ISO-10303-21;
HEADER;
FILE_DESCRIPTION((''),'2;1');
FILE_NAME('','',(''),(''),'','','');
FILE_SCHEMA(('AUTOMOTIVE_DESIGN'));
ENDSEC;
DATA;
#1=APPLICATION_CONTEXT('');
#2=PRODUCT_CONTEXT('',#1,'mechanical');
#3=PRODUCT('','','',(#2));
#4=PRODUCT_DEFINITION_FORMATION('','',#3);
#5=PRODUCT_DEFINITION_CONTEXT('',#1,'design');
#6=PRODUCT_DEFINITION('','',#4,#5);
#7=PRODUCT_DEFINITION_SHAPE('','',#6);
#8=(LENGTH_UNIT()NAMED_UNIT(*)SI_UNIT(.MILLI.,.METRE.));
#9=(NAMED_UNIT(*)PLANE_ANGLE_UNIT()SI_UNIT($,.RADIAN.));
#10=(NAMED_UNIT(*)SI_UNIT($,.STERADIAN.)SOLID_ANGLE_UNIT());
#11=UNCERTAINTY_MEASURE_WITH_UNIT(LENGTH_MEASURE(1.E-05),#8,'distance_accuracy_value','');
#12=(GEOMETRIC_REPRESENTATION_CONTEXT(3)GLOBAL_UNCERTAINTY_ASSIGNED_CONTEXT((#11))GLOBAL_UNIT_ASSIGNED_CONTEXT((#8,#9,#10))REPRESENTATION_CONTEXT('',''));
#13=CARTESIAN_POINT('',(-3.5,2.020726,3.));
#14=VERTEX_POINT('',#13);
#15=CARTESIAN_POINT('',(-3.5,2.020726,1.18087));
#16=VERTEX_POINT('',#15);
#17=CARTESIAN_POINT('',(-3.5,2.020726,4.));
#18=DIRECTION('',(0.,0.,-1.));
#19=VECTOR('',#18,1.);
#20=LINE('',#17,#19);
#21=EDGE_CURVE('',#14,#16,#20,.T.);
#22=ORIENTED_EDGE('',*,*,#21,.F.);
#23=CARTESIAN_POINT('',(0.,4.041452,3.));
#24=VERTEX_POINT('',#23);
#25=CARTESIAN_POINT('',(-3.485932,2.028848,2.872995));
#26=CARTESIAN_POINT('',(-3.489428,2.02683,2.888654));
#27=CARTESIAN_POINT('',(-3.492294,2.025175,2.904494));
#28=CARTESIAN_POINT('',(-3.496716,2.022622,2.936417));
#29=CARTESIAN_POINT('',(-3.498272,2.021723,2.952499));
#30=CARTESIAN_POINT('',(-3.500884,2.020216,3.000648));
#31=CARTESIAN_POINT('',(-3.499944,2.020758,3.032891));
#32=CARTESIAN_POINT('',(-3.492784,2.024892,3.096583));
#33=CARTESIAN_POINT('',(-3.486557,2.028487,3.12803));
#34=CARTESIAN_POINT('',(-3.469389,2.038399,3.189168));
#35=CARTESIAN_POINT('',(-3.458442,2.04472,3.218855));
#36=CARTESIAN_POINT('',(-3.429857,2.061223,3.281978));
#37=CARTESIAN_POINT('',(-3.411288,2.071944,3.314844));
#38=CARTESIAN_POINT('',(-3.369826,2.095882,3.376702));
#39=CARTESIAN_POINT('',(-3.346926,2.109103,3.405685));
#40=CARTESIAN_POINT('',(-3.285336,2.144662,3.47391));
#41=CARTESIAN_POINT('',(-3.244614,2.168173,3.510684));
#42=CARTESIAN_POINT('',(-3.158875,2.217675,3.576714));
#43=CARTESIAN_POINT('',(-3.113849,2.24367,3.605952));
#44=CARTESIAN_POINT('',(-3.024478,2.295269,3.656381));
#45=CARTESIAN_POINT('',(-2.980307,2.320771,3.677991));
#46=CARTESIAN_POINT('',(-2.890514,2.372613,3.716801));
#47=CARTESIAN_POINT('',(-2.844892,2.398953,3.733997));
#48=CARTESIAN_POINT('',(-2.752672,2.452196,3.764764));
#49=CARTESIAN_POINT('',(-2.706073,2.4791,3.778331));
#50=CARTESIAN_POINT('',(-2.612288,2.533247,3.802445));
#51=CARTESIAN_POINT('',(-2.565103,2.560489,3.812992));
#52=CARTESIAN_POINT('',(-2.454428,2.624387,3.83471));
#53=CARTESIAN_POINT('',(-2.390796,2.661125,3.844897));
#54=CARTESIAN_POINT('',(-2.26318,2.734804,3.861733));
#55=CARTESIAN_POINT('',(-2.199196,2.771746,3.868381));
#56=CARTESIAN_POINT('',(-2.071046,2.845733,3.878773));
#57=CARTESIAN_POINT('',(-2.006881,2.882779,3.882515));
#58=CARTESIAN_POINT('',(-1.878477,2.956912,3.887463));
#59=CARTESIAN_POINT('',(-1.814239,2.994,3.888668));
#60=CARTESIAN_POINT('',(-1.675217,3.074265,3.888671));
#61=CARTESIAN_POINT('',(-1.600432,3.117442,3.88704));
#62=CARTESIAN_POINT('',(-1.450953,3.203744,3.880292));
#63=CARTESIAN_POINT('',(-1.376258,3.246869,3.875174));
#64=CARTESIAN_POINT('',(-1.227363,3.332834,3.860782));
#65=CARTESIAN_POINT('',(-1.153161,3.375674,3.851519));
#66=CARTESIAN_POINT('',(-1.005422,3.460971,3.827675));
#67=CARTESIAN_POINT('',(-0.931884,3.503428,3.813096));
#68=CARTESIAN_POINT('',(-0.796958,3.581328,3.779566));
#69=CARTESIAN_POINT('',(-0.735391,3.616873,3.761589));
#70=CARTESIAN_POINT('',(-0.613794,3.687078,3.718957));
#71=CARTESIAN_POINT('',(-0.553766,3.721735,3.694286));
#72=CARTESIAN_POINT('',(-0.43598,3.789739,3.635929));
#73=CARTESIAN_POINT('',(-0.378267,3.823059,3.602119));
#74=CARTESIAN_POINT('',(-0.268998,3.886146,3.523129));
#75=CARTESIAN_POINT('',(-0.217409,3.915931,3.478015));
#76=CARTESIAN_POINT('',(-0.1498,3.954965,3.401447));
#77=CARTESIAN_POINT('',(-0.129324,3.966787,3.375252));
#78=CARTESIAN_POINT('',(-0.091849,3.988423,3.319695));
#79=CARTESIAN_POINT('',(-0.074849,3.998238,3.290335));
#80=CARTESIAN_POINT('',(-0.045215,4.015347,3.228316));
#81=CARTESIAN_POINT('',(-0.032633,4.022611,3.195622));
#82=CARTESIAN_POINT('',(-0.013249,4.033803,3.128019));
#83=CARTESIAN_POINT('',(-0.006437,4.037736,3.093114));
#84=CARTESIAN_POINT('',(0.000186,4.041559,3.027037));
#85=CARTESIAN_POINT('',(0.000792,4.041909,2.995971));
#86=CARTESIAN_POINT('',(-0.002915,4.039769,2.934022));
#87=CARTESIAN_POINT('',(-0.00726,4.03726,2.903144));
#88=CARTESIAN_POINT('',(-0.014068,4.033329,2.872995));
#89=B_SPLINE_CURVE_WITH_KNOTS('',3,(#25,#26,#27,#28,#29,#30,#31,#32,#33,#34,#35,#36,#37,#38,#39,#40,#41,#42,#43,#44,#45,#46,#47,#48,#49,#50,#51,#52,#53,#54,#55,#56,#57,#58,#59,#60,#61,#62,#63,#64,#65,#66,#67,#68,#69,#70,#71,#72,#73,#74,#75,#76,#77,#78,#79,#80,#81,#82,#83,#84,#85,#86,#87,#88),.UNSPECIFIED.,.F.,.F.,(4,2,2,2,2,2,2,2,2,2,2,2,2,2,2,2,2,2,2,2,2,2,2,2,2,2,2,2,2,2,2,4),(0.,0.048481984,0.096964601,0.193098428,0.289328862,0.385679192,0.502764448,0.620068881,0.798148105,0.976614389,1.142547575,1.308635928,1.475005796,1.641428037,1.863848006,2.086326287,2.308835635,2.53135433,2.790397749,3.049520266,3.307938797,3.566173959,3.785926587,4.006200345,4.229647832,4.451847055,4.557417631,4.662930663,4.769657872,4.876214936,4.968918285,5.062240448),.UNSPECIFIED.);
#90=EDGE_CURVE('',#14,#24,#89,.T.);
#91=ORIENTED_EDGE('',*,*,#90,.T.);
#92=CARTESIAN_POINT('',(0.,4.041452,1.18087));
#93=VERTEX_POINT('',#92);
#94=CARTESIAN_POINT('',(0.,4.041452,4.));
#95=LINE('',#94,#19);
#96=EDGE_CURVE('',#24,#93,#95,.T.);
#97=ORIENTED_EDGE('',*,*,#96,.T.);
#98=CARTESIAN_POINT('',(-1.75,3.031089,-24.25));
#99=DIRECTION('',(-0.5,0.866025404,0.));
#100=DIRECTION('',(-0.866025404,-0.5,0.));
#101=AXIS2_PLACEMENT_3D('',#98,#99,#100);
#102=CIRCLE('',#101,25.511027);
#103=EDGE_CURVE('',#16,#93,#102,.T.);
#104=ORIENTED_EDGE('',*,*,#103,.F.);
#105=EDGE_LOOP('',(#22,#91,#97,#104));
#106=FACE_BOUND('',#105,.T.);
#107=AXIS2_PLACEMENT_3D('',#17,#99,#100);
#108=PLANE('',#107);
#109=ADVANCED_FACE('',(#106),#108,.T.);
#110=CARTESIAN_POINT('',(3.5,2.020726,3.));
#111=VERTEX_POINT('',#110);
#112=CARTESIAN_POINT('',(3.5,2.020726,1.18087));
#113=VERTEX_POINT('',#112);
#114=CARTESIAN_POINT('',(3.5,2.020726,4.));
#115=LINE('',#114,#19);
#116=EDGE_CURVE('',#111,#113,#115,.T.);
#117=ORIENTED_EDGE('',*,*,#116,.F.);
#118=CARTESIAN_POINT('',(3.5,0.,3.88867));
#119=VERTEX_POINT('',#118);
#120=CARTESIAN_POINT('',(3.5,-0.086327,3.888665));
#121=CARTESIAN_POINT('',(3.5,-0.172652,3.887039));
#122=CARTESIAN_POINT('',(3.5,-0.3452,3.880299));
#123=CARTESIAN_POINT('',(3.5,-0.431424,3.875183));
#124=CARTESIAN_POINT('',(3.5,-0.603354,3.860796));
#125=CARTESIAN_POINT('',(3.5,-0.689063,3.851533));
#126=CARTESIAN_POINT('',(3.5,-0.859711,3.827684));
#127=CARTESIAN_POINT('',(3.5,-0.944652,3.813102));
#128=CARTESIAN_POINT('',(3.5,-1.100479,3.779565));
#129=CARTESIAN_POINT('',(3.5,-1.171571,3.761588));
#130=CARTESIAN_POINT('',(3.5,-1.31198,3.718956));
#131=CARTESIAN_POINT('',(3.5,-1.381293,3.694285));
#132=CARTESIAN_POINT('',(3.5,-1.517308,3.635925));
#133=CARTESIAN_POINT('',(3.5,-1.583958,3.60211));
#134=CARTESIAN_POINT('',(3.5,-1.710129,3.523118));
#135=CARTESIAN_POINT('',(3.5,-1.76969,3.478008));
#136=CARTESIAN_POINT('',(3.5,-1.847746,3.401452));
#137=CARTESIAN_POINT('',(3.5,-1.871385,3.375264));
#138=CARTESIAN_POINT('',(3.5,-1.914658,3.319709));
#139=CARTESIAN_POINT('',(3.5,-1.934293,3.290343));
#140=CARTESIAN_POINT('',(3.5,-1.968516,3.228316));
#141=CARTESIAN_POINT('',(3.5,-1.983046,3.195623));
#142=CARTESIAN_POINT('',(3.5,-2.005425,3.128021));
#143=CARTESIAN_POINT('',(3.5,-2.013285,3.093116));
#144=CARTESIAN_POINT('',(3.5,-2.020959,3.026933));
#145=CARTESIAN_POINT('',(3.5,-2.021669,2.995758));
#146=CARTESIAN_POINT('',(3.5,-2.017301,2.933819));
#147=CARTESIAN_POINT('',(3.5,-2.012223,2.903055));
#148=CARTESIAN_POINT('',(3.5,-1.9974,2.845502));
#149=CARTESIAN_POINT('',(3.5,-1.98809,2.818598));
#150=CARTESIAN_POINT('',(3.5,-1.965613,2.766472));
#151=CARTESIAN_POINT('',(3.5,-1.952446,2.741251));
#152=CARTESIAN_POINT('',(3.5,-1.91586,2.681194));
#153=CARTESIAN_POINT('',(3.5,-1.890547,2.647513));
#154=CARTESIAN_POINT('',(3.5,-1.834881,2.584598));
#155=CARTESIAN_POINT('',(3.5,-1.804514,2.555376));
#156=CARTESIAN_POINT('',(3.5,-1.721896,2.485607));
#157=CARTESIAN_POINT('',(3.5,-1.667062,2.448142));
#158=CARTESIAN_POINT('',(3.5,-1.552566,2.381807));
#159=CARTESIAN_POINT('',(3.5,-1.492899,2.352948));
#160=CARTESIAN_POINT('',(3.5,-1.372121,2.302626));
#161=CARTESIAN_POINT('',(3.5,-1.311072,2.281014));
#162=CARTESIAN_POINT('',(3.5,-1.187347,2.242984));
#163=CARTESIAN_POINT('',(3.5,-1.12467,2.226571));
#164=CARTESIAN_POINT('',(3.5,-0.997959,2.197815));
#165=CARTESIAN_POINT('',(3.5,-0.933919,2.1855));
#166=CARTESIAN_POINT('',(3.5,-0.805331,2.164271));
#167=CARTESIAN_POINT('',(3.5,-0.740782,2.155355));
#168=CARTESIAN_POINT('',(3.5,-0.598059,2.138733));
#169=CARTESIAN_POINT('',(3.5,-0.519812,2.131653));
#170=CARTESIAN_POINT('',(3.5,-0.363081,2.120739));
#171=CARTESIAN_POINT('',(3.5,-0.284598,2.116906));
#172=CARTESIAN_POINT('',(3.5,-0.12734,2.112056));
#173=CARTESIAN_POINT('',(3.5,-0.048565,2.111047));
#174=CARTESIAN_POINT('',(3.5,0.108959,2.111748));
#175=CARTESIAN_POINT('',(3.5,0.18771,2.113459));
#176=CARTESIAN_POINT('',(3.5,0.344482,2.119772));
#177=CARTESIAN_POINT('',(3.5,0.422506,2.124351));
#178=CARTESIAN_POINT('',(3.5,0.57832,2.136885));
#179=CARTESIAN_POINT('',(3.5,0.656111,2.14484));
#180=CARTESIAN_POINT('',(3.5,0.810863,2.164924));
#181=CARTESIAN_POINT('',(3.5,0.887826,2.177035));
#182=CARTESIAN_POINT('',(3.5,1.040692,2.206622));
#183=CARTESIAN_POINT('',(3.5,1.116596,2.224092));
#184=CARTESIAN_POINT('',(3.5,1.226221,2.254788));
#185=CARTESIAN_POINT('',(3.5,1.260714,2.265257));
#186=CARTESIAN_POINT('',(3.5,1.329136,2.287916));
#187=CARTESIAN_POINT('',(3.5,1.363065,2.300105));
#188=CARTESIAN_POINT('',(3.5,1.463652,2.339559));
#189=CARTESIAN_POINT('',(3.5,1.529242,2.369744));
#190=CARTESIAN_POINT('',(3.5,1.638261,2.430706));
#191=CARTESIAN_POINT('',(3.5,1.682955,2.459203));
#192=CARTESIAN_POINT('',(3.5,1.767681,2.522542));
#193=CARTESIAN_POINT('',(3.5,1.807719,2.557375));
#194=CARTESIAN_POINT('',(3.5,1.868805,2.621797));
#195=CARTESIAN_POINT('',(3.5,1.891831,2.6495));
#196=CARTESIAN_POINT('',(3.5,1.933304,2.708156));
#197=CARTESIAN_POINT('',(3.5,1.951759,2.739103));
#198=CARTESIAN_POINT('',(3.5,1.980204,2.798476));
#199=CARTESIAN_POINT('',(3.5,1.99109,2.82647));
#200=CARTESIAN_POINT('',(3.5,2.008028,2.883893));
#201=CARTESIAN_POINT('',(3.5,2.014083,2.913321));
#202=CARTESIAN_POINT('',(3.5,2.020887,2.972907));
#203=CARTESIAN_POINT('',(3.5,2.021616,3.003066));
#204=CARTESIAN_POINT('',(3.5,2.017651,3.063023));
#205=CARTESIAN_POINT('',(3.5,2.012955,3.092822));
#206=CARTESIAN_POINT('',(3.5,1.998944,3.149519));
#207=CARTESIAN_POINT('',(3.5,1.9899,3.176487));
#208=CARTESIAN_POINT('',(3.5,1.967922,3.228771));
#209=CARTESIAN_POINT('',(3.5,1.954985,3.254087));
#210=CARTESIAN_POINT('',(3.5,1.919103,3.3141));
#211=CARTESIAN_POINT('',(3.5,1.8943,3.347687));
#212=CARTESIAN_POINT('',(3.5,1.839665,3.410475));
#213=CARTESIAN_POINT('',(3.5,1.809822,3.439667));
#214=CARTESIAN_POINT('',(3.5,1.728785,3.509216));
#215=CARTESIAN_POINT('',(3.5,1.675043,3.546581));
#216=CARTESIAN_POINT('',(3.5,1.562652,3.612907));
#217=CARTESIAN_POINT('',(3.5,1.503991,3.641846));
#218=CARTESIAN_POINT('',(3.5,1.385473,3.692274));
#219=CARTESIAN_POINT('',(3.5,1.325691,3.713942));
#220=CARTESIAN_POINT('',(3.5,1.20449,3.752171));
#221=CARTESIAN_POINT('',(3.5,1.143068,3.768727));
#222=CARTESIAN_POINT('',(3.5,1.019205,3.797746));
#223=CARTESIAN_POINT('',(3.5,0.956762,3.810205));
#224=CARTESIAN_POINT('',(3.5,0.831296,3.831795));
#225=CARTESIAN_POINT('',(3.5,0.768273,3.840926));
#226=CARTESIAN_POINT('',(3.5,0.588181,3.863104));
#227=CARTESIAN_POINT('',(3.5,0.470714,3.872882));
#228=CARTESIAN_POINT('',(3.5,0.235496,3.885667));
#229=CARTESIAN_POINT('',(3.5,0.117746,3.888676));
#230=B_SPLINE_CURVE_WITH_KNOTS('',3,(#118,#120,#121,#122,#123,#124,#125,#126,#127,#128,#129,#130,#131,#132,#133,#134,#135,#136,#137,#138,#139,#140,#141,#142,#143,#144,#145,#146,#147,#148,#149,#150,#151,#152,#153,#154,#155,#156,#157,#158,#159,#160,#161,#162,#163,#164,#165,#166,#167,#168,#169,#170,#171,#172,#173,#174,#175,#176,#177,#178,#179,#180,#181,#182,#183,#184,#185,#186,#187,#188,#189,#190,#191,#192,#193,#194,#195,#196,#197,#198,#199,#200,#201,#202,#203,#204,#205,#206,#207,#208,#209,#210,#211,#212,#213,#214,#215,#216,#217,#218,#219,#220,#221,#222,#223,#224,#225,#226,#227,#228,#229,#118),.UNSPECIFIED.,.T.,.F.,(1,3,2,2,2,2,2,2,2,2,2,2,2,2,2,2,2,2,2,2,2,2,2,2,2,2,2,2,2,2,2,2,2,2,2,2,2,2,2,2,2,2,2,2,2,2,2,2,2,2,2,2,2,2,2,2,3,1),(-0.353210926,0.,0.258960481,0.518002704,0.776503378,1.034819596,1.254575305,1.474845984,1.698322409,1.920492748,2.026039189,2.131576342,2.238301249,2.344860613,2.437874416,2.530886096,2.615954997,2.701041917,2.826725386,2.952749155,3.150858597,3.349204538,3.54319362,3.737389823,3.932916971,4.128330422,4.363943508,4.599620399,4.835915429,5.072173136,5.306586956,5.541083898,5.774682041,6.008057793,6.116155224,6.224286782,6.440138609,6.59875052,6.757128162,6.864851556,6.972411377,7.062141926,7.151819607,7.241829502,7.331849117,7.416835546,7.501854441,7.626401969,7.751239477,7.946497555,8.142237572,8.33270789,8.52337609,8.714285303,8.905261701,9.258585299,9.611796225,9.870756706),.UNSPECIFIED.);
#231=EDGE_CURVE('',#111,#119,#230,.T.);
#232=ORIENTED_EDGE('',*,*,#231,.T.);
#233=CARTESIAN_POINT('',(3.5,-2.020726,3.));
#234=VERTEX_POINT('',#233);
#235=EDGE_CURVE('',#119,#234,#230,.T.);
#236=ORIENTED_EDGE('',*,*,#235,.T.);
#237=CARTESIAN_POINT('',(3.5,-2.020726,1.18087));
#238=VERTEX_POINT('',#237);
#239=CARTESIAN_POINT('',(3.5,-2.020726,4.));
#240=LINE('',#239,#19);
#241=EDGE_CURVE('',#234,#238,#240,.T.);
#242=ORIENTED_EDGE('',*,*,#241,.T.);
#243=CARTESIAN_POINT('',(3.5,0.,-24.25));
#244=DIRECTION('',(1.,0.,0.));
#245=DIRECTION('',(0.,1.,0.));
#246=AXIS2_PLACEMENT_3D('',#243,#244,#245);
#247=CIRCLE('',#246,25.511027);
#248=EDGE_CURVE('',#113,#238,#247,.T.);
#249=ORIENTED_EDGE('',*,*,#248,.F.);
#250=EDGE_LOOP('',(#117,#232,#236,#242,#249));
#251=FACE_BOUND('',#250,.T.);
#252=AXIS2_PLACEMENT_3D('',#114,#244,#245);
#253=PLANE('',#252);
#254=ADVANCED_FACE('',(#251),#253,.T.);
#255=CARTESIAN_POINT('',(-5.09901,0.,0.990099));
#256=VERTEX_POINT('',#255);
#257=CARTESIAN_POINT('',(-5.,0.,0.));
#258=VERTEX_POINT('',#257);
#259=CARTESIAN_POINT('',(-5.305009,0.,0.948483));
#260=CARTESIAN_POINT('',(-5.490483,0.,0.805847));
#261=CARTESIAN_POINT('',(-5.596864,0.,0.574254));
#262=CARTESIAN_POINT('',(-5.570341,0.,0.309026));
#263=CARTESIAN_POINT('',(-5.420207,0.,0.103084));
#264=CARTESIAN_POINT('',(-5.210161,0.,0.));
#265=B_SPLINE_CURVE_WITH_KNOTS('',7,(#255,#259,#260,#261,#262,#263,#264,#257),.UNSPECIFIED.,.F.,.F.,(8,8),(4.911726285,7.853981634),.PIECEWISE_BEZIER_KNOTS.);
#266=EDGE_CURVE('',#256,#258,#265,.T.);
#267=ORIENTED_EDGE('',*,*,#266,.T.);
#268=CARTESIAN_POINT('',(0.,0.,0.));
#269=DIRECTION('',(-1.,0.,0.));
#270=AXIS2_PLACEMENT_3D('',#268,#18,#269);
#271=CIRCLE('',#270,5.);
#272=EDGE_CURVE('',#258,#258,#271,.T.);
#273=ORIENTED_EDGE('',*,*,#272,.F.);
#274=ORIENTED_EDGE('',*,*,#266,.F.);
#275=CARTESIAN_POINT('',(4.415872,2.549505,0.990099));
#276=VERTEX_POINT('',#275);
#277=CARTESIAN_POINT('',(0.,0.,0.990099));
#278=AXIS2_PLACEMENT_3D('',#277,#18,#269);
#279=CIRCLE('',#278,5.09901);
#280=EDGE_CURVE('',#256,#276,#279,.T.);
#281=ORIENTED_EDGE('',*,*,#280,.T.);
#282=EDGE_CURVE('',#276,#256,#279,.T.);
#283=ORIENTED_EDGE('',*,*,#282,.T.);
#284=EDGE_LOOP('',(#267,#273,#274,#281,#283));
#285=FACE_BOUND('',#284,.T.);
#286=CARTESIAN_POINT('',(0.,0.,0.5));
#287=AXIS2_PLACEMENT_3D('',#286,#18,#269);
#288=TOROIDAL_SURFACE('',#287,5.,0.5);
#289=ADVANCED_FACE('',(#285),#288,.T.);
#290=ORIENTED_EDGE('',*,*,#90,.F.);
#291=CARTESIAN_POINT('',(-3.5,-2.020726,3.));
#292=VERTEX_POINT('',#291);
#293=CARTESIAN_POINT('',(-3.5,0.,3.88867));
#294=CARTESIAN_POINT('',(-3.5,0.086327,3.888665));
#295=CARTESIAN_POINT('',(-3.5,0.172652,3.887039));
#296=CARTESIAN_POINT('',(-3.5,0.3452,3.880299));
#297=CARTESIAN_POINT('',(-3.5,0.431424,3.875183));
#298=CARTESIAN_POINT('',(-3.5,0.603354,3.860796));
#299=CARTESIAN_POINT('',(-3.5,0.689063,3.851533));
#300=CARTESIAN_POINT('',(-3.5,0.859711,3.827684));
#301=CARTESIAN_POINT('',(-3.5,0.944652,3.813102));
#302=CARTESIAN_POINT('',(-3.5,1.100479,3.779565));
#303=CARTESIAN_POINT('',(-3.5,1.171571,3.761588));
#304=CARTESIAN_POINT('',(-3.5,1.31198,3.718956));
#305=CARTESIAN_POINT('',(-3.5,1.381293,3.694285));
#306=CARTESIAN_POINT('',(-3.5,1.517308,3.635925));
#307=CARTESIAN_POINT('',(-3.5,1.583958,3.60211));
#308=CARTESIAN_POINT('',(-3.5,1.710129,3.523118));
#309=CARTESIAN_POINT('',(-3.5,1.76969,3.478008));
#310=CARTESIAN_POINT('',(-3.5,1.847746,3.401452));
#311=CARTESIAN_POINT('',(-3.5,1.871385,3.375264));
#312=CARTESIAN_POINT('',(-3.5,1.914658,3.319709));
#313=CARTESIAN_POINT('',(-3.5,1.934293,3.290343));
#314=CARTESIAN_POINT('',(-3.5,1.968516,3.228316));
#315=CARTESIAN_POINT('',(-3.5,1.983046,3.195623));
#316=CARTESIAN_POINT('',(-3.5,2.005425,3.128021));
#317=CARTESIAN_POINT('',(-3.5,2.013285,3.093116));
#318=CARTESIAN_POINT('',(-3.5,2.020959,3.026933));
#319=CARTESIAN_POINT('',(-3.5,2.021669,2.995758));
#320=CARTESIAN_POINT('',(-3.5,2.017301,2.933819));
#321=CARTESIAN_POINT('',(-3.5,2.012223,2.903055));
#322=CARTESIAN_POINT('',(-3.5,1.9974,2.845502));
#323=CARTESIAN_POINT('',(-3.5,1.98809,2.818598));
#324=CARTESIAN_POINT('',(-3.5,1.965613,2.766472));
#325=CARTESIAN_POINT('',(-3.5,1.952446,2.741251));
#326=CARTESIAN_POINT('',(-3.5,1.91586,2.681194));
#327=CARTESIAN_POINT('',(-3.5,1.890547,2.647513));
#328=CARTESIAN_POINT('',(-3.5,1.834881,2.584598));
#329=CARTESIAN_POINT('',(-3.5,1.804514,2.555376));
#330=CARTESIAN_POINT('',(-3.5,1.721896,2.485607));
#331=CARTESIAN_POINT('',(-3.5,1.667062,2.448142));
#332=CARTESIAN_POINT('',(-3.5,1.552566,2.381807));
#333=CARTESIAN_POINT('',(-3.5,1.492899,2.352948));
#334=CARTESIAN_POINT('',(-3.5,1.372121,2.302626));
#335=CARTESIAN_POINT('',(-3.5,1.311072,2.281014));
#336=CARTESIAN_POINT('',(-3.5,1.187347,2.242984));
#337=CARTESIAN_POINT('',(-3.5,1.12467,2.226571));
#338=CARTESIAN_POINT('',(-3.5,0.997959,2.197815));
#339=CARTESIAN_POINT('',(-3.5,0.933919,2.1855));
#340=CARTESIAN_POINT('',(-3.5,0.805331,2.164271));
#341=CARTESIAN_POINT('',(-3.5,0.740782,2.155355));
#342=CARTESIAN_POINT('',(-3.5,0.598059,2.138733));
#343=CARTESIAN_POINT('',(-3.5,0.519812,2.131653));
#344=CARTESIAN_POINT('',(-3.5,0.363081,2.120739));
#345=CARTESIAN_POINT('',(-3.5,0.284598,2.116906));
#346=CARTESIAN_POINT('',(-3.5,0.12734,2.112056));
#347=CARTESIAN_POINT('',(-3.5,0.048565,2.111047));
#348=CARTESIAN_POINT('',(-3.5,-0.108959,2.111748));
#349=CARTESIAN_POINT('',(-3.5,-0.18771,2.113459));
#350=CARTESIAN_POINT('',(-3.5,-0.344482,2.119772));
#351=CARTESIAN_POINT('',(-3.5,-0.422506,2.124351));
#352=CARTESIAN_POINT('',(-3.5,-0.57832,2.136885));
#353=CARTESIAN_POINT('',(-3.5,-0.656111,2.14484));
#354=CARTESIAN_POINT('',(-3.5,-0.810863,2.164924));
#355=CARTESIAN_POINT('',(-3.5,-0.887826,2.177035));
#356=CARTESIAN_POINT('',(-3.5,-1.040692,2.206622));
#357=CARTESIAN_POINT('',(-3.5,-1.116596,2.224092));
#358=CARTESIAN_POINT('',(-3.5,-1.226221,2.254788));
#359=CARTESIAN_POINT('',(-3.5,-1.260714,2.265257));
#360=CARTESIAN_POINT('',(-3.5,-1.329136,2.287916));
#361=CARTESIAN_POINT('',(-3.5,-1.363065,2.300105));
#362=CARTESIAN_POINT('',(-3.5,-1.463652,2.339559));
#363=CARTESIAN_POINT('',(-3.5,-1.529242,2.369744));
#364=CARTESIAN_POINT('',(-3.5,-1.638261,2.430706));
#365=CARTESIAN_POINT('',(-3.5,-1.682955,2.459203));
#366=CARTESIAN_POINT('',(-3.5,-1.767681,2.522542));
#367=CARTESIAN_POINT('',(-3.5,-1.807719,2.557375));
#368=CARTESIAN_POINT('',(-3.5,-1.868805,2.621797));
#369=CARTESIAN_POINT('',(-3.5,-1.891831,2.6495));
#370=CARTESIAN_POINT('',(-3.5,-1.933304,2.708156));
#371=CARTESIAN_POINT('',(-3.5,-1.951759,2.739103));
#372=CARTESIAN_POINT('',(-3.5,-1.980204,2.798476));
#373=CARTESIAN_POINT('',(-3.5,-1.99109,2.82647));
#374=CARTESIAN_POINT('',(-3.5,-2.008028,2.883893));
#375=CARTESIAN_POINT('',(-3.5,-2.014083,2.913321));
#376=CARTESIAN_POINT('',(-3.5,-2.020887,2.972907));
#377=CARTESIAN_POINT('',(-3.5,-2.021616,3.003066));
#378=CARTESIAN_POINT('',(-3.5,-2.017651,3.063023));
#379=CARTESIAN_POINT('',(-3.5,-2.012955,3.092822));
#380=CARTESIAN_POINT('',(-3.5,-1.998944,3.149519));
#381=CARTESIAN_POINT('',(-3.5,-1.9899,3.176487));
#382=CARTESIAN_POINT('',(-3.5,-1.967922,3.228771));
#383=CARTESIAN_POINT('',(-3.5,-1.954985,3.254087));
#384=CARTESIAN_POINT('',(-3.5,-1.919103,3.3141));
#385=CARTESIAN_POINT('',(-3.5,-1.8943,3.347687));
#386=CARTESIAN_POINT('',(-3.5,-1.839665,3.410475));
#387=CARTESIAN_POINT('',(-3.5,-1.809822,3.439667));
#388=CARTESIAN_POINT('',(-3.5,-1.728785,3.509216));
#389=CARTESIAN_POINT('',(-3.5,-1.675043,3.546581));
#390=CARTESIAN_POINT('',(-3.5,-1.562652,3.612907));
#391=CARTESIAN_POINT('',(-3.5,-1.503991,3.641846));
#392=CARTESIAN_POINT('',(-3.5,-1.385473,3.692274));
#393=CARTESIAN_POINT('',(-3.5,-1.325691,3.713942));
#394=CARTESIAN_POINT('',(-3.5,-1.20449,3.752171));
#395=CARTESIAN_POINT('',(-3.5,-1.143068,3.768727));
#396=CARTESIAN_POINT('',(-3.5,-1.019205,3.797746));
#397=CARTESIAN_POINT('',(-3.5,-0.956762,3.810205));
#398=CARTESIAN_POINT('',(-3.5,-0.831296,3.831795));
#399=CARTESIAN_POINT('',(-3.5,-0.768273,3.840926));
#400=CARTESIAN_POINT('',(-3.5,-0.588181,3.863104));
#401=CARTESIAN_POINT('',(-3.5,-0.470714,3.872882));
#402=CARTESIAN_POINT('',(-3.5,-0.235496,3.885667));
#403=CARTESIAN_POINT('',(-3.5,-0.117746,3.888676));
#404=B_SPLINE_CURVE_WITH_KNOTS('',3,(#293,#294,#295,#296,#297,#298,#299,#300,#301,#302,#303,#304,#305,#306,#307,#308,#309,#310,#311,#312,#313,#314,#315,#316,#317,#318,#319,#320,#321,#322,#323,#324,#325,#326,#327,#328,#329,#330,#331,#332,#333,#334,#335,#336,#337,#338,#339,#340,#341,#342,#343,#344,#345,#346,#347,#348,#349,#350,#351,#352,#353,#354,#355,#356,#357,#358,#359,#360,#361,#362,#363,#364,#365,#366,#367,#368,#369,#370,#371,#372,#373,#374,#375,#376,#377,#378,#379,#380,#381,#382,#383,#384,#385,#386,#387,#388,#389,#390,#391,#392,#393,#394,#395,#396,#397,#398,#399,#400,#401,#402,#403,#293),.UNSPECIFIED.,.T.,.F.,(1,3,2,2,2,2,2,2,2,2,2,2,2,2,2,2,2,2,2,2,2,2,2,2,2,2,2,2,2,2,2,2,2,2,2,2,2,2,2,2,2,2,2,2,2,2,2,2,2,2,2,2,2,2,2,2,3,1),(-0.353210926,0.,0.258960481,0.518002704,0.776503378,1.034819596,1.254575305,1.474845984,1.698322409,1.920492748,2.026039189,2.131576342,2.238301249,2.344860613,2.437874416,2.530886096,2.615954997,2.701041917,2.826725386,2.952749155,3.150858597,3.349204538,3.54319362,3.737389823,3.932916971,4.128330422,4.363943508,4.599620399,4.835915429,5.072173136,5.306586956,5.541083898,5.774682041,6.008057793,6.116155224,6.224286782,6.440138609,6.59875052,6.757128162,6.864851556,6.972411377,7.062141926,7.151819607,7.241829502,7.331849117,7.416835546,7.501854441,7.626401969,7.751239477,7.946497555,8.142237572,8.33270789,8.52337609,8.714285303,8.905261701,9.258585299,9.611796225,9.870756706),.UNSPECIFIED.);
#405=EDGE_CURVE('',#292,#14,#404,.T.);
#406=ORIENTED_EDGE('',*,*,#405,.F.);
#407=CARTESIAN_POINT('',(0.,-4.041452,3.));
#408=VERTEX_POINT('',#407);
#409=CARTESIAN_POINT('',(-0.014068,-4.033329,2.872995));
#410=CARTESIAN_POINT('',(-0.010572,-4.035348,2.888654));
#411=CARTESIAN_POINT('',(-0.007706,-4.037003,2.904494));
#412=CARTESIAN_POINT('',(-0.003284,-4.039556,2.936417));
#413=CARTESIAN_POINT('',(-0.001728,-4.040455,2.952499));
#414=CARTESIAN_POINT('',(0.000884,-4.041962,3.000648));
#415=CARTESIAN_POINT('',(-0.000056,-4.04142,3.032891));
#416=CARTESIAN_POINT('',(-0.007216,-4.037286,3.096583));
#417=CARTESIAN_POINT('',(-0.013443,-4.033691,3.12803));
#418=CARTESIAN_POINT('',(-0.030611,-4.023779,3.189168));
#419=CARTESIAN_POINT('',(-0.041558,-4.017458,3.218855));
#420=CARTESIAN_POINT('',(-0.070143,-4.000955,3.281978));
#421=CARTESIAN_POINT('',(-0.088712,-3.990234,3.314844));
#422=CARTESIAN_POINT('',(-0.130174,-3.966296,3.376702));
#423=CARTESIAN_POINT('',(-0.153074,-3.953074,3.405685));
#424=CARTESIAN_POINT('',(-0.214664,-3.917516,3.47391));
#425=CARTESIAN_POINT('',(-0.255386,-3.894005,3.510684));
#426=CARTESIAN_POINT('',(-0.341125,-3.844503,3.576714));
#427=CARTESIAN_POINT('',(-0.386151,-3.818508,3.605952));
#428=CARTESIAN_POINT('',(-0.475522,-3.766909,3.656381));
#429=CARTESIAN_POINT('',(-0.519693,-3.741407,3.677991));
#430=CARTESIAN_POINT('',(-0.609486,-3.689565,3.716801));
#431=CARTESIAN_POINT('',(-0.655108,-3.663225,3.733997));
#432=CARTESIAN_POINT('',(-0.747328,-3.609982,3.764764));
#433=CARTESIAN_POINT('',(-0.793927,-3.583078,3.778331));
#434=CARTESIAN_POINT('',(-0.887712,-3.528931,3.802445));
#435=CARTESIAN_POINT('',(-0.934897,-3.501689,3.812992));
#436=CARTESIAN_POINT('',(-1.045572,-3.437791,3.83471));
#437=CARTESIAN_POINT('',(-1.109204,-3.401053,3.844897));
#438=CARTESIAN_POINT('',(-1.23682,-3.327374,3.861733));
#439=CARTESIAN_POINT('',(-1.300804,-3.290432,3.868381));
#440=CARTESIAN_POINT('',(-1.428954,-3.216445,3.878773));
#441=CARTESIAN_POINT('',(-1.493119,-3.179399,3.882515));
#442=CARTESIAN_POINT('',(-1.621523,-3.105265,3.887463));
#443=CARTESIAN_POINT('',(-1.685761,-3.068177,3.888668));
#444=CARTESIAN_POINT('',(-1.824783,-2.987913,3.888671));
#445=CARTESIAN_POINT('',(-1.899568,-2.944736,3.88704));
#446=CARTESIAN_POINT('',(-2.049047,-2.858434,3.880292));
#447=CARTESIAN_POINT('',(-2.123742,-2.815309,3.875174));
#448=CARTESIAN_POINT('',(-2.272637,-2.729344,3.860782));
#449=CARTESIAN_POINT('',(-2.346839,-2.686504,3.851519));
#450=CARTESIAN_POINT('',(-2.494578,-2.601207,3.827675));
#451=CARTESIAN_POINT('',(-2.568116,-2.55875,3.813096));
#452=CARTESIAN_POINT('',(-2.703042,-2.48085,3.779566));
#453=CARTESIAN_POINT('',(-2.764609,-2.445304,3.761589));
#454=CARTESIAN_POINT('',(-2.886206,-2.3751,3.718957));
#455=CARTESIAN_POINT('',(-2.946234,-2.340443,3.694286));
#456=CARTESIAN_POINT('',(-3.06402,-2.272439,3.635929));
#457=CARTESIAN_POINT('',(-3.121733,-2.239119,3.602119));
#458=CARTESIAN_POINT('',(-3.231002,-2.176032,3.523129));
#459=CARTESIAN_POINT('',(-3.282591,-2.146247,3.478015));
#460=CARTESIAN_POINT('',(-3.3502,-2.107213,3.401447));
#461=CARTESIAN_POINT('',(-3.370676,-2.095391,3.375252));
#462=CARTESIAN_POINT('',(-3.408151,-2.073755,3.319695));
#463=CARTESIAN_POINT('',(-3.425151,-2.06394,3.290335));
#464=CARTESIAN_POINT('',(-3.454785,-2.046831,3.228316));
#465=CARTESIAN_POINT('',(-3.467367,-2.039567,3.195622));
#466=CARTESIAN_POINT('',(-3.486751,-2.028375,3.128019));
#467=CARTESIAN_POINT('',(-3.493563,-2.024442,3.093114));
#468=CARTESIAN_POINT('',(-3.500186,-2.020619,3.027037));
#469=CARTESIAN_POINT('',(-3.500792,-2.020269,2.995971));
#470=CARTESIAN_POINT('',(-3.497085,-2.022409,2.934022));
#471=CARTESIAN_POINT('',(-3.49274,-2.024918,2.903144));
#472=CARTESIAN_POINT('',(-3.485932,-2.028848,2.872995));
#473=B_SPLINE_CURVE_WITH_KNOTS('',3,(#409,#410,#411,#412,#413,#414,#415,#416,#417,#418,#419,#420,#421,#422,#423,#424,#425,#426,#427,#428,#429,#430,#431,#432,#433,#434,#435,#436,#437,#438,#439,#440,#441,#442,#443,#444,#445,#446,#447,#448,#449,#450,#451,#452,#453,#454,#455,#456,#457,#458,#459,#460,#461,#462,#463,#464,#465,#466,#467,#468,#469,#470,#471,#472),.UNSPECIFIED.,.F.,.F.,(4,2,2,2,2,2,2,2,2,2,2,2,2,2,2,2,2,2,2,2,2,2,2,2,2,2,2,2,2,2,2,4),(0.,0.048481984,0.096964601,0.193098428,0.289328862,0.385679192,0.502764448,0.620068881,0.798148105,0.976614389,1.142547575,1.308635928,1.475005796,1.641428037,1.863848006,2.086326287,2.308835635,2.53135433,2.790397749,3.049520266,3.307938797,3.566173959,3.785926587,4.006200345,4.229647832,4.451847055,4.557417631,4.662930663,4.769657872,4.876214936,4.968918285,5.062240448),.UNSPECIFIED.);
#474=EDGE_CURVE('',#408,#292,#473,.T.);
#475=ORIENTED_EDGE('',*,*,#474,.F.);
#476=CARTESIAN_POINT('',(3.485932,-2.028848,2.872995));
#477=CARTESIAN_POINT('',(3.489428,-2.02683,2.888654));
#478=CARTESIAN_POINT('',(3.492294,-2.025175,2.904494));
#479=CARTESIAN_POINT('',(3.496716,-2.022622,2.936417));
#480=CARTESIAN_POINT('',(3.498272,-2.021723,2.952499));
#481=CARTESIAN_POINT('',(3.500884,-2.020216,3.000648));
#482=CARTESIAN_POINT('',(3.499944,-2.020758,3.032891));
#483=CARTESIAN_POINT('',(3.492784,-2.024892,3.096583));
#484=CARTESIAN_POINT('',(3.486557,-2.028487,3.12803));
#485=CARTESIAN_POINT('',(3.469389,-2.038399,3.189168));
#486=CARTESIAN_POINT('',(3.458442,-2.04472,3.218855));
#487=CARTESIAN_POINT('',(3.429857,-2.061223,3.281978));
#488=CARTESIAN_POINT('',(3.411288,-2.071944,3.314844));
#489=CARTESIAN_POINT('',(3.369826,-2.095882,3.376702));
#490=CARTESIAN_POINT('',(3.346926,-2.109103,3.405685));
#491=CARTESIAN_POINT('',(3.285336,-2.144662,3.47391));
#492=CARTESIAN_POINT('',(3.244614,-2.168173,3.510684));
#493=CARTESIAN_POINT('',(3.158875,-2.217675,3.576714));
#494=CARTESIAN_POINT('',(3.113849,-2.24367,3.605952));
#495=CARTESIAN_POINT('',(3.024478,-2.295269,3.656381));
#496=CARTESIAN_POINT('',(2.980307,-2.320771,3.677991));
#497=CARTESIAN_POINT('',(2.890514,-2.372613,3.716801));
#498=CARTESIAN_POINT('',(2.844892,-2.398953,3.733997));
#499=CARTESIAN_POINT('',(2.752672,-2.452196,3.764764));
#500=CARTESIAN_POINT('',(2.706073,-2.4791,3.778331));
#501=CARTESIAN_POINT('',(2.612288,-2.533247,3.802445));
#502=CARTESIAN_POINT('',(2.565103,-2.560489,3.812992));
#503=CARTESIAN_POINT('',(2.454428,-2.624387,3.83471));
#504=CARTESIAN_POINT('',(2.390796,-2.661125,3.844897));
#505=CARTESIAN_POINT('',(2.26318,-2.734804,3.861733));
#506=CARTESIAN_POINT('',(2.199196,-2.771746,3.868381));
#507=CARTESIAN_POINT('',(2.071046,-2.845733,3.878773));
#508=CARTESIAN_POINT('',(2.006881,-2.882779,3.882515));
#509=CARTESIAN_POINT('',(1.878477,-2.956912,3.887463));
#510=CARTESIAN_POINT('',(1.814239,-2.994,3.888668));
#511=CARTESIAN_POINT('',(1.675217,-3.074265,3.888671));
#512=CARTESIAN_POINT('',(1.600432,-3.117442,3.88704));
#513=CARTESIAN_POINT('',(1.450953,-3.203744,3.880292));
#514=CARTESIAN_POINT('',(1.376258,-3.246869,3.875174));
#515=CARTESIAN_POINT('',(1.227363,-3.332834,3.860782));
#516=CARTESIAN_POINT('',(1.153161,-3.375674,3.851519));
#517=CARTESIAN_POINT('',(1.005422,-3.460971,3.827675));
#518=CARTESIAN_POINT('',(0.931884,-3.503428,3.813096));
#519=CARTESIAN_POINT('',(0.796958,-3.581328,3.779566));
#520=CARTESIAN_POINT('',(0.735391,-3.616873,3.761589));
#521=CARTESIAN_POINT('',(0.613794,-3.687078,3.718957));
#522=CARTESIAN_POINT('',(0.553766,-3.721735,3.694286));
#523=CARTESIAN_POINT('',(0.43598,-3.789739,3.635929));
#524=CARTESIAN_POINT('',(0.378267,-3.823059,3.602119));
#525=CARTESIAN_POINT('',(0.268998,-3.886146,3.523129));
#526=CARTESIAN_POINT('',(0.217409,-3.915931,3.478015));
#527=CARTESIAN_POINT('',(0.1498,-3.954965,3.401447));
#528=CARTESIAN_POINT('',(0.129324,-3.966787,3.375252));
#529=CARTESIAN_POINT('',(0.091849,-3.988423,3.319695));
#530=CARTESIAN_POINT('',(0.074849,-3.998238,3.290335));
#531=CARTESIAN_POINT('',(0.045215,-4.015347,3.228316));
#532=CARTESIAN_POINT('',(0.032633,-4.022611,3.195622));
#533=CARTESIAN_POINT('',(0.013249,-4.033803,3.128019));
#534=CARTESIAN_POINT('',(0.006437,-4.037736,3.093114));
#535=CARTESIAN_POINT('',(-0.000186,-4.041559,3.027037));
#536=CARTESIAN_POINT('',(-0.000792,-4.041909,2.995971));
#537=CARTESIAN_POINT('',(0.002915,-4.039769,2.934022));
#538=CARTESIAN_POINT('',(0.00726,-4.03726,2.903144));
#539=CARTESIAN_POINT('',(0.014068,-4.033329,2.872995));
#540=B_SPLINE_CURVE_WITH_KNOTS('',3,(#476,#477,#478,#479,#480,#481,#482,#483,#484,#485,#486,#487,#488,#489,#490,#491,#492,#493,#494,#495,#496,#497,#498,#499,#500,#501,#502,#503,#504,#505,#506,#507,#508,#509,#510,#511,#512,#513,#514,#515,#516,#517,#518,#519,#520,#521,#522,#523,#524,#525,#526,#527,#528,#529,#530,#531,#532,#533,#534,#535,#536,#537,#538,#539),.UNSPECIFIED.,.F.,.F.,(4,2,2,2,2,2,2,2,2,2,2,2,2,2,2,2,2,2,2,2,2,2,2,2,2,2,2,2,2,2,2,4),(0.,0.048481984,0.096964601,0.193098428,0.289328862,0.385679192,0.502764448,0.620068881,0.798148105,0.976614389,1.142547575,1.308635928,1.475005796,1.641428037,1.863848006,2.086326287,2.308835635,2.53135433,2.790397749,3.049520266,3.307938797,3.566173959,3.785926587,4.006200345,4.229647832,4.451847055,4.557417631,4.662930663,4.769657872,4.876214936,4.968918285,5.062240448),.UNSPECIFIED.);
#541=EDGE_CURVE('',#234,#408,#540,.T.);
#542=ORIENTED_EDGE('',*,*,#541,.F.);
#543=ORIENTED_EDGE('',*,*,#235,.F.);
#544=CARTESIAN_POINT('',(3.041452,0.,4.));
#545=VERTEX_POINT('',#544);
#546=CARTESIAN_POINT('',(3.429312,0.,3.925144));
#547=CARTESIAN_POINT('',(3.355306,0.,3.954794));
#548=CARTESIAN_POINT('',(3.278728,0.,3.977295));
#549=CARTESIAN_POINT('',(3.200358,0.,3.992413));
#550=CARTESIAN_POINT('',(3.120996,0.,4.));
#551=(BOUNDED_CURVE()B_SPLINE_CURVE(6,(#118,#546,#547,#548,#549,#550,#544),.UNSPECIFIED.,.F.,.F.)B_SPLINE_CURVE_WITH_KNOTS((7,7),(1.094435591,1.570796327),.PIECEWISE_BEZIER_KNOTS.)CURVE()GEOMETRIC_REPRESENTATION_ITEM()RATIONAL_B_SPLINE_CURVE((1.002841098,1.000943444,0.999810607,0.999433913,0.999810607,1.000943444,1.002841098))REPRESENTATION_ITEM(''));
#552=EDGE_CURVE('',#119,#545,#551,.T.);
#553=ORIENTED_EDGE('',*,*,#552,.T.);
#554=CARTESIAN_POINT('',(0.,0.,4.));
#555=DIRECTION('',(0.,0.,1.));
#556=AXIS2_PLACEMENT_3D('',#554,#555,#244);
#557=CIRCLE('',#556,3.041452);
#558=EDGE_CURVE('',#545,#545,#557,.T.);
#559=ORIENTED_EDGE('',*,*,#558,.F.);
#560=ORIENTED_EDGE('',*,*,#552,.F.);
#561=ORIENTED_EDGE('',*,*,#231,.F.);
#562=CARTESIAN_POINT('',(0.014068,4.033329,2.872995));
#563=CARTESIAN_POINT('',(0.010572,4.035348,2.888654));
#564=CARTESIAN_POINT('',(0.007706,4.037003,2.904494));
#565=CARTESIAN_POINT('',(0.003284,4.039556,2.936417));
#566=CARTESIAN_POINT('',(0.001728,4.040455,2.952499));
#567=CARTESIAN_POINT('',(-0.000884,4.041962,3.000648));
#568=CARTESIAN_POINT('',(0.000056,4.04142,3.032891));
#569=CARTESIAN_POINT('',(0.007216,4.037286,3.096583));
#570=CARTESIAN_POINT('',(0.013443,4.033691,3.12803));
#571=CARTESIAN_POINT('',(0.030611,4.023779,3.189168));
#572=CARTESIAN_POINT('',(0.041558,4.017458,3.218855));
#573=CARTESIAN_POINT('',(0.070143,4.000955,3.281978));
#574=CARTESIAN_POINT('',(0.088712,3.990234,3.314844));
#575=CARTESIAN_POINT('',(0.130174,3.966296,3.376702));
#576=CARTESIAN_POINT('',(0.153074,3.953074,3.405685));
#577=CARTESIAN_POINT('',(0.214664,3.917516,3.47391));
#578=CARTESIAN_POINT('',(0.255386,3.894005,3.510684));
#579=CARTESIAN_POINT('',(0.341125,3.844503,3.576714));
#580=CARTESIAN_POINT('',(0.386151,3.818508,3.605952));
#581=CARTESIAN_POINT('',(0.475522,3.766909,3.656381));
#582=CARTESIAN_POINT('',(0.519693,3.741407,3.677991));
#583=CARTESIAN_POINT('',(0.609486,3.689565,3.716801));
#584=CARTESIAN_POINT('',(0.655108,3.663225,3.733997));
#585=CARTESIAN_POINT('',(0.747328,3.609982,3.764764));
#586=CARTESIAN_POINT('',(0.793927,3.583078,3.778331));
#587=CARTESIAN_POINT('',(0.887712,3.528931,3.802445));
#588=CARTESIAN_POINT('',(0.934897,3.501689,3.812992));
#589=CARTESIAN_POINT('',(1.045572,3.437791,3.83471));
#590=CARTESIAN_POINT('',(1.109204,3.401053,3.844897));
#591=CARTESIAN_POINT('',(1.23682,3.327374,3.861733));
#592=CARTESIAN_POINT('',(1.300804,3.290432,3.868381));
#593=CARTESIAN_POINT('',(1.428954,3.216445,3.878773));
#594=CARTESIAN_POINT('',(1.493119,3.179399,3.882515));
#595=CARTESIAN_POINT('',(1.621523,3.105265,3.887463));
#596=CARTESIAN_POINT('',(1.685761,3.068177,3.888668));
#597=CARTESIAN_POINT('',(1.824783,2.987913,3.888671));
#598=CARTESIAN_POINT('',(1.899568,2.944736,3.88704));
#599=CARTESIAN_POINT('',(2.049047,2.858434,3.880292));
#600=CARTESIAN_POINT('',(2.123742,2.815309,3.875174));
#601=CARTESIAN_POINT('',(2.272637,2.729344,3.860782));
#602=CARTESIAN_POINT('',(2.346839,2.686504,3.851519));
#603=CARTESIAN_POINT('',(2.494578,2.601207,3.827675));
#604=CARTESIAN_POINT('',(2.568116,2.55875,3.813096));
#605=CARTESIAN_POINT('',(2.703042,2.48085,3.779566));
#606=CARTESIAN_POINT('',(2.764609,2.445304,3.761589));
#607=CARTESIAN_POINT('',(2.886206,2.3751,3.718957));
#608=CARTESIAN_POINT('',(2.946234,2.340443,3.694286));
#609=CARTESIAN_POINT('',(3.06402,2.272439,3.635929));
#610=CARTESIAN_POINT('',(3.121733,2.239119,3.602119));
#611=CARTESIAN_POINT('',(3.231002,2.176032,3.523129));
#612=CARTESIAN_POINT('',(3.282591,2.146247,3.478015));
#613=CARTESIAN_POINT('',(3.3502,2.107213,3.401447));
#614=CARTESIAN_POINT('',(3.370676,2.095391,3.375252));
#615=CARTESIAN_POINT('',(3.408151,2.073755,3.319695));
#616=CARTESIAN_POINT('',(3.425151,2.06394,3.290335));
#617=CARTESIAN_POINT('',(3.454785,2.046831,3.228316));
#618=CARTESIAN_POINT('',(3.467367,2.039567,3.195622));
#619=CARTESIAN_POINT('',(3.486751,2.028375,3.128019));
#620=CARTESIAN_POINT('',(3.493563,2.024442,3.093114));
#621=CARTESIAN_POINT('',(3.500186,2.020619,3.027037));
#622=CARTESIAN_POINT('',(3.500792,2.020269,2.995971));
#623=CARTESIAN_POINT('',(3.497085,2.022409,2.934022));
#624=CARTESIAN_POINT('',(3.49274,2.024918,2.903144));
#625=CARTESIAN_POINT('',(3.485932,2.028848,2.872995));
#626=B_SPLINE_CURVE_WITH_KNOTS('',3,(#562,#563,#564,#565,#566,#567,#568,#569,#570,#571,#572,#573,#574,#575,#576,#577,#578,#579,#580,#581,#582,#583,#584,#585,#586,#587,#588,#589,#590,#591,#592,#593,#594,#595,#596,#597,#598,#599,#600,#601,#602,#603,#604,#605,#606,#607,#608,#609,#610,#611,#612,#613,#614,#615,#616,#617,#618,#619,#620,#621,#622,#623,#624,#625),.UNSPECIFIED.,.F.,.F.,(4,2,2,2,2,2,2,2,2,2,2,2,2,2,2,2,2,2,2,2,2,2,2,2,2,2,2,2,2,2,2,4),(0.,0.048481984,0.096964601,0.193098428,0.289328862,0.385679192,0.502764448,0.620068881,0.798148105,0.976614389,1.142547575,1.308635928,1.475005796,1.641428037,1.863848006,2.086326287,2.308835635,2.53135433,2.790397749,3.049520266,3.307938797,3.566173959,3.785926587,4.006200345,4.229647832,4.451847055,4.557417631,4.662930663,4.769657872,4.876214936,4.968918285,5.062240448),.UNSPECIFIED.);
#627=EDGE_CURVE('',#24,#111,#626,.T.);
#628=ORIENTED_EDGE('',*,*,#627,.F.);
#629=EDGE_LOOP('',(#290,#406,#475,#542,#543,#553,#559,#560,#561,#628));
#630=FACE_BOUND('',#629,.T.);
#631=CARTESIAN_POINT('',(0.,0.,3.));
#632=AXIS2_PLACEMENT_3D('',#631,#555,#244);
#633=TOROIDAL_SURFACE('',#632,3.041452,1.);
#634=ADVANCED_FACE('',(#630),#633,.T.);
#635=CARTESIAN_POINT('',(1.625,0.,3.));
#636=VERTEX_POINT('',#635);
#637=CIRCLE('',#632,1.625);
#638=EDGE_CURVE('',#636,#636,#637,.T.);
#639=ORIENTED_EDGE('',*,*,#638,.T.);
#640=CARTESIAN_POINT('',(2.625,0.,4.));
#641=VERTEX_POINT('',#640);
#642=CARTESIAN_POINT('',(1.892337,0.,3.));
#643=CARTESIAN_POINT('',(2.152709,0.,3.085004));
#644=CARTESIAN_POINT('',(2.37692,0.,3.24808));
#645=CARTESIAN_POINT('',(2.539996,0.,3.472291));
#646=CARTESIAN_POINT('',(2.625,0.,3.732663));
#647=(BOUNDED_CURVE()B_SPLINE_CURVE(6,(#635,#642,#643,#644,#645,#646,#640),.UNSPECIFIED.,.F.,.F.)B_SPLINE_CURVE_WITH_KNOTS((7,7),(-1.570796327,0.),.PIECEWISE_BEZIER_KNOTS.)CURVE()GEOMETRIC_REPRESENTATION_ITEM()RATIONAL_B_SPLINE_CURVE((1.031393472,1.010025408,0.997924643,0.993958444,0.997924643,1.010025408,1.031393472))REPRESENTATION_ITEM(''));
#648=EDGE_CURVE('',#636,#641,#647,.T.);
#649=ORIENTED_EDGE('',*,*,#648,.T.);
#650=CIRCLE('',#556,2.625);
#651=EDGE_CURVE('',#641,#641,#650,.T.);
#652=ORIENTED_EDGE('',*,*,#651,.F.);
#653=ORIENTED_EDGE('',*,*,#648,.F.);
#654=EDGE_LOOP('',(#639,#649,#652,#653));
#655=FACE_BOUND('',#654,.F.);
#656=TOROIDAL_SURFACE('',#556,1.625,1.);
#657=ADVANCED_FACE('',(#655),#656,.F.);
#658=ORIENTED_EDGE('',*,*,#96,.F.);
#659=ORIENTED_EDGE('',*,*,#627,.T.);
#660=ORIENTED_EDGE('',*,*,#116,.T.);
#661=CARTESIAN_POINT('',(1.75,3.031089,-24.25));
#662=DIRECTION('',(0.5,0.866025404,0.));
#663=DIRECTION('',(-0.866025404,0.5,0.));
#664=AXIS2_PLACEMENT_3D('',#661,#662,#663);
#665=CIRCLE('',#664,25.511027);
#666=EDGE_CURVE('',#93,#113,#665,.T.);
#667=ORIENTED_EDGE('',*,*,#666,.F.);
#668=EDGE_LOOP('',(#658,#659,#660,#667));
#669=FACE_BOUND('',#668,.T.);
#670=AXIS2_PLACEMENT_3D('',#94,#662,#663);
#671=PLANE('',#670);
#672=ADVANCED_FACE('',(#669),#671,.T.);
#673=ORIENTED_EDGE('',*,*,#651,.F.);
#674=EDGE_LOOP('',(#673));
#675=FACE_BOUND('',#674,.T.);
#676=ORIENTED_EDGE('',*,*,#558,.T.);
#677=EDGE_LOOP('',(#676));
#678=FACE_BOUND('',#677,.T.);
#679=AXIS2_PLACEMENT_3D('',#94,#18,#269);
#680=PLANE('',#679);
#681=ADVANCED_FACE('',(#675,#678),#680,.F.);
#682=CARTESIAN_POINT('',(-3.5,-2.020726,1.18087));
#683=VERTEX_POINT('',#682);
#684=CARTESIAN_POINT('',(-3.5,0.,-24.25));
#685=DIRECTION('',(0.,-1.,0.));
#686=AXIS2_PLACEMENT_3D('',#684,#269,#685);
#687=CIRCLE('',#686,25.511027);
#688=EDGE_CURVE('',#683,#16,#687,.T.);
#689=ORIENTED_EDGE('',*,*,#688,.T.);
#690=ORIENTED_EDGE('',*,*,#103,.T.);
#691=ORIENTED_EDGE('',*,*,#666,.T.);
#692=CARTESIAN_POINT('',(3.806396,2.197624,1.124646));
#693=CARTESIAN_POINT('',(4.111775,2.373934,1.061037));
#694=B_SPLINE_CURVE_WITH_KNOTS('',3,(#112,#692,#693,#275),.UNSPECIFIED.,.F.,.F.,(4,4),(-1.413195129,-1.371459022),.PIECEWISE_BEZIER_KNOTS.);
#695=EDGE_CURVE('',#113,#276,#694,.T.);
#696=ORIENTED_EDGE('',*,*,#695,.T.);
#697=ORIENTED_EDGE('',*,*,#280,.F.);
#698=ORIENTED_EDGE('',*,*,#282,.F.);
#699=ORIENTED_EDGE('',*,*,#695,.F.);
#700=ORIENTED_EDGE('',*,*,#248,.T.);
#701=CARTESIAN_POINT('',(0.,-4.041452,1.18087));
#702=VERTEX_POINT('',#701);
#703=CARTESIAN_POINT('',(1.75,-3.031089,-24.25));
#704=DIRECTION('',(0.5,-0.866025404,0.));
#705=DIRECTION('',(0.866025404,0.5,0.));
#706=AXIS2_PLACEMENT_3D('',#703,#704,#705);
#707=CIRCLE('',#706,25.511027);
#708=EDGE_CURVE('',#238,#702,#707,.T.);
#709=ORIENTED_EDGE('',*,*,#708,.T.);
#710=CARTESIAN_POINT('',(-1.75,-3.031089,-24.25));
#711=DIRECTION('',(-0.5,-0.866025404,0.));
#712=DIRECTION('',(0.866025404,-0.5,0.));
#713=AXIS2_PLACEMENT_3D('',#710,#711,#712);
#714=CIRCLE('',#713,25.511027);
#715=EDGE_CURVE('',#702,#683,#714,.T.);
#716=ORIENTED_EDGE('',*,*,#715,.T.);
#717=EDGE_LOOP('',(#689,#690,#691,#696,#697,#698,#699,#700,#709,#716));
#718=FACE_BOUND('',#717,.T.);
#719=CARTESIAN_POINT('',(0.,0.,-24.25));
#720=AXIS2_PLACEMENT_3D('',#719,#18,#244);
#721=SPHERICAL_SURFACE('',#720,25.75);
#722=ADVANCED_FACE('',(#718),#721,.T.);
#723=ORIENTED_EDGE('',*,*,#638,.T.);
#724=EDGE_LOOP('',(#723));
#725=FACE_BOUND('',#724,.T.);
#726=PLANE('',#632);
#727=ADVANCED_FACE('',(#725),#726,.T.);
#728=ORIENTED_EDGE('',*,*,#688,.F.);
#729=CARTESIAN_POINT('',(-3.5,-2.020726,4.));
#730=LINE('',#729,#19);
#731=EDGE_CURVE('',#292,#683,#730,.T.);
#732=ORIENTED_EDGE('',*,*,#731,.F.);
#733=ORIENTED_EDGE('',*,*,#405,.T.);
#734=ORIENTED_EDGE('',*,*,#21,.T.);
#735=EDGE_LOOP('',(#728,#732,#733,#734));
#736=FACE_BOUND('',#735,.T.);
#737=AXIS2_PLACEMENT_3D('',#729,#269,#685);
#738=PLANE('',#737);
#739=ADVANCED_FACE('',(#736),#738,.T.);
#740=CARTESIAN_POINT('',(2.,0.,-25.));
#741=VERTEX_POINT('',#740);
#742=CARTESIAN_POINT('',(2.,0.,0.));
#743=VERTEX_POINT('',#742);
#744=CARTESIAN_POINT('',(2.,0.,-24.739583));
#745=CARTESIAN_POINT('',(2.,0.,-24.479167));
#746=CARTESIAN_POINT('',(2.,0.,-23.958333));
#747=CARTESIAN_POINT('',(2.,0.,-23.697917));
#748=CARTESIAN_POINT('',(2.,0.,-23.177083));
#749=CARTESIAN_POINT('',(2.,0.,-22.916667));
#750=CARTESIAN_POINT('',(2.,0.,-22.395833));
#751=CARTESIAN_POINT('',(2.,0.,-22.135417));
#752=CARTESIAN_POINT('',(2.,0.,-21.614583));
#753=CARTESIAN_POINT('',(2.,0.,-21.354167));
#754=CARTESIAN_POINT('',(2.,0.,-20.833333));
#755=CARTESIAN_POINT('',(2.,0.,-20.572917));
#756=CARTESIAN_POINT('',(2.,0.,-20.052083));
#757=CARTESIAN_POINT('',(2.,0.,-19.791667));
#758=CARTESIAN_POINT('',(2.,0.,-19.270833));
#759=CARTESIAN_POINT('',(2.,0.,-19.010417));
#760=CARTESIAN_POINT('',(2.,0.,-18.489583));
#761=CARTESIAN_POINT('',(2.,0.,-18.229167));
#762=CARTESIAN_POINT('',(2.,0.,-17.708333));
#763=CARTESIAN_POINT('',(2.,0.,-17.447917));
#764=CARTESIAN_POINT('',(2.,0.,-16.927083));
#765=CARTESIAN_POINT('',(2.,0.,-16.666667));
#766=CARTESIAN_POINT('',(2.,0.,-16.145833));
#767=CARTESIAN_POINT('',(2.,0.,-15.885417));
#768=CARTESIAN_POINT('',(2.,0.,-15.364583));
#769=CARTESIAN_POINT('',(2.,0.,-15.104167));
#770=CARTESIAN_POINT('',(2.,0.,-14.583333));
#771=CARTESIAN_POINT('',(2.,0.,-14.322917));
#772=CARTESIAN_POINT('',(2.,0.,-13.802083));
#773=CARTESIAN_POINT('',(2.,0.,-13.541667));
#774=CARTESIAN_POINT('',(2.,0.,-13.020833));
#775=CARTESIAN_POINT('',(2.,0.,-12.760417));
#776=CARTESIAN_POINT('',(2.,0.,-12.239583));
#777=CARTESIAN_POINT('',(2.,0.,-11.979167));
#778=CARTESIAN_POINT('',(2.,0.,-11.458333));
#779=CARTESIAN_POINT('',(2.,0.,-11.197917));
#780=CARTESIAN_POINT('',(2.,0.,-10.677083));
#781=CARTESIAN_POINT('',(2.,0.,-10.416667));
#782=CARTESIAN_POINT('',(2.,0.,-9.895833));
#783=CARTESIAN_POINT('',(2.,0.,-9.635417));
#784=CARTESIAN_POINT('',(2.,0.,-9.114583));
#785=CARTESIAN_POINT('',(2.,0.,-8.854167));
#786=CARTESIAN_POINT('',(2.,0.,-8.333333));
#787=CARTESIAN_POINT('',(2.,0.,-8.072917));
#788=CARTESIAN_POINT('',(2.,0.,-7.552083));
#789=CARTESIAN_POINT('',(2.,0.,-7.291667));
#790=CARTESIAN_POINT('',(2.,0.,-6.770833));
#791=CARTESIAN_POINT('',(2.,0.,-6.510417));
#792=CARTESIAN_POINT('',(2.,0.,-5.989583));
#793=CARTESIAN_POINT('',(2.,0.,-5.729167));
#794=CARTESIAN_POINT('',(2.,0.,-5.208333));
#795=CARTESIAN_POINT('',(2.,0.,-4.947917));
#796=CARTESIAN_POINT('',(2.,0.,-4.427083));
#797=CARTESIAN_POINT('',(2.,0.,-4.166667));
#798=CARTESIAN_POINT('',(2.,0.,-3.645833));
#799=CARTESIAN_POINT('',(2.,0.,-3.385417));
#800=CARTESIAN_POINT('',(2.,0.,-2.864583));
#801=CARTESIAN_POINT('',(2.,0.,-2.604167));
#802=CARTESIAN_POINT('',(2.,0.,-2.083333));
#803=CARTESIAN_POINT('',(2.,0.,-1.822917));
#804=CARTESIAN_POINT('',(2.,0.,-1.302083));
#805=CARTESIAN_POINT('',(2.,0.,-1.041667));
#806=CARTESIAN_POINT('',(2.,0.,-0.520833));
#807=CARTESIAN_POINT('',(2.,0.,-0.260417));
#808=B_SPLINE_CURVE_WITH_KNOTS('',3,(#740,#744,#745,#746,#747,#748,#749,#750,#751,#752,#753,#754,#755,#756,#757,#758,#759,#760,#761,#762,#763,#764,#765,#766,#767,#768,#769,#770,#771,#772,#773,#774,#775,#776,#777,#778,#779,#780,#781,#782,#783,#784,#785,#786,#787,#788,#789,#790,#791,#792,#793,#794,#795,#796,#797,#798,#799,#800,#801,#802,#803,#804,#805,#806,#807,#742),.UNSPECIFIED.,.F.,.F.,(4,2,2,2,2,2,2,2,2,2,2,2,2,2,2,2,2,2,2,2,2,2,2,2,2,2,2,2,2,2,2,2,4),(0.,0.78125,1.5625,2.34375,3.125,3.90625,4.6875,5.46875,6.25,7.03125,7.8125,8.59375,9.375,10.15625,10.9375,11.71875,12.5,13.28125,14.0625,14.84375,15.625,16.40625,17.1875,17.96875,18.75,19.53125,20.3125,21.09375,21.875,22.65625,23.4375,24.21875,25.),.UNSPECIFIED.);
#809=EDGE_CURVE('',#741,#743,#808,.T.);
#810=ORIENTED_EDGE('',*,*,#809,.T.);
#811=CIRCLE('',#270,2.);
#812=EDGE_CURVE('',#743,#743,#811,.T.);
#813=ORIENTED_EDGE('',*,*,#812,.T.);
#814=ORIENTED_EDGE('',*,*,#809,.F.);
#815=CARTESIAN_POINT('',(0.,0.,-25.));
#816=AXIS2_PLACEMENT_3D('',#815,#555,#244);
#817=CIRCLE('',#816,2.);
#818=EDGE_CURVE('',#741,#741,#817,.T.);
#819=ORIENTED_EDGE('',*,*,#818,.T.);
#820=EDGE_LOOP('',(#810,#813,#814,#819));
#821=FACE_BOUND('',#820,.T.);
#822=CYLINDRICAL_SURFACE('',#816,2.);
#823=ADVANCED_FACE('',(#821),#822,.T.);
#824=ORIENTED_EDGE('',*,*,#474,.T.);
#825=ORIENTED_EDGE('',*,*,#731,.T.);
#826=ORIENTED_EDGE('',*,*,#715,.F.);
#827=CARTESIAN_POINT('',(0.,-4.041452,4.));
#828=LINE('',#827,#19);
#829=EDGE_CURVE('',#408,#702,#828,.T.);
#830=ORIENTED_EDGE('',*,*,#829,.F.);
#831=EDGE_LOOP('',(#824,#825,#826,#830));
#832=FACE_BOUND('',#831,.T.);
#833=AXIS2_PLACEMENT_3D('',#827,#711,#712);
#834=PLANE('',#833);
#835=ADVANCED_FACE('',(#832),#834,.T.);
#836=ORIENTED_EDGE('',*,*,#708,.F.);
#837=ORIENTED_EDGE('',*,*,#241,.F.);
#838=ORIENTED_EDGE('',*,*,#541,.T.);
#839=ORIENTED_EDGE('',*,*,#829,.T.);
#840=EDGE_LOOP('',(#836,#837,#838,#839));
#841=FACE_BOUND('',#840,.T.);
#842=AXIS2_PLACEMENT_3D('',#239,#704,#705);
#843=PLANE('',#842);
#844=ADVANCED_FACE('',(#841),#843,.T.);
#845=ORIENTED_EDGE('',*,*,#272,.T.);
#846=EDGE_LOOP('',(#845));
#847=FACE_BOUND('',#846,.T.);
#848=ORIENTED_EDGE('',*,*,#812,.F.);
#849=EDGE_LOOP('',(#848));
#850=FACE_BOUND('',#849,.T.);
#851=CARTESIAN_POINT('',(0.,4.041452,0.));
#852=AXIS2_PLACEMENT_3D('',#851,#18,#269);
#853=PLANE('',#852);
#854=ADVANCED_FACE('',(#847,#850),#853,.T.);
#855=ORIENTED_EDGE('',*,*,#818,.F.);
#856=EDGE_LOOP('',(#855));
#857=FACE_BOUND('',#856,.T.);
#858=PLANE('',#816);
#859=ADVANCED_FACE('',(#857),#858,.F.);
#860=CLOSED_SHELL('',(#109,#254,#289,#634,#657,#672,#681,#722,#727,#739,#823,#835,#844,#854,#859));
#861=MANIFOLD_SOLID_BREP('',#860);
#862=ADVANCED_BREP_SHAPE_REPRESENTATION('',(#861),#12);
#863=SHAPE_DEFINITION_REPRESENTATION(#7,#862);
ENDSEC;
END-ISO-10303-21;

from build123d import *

# Parameters (mm, degrees)
HEAD_DEPTH     = 4
SHANK_SKETCH_R = 2
SHANK_DEPTH    = 25
SKETCH6_R      = 2.625
HEAD_CUT_DEPTH = 1
FILLET1_R      = 1


with BuildPart() as part:
    # Head Sketch → Head (new body)
    with BuildSketch(Plane.XY):
        Polygon((0, 4.041451884), (3.5, 2.020725942), (3.5, -2.020725942), (0, -4.041451884), (-3.5, -2.020725942), (-3.5, 2.020725942), align=None)
    extrude(amount=HEAD_DEPTH)

    # Shank Sketch → Shank (add)
    with BuildSketch(Plane.XY):
        Circle(SHANK_SKETCH_R)
    extrude(amount=-SHANK_DEPTH)

    # Sketch3 → Flange (revolve)
    with BuildSketch(Plane(origin=(0, 0, 0), x_dir=(-1, 0, 0), z_dir=(0, 1, 0)), mode=Mode.PRIVATE) as flange_sk:
        with BuildLine():
            Line((-5, 0), (0, 0))
            Line((0, 0), (0, 1.5))
            ThreePointArc((0, 1.5), (-2.562220765, 1.372207648), (-5.099009901, 0.99009901))
            ThreePointArc((-5.099009901, 0.99009901), (-5.497518595, 0.45024814), (-5, 0))
        make_face()
    revolve(flange_sk.sketch.rotate(Axis((0, 0, 0), (0, 0, 1)), 30), axis=Axis((0, 0, 0), (0, 0, 1)))

    # Sketch5 → Head Trim (revolve, cut)
    with BuildSketch(Plane(origin=(0, 0, 0), x_dir=(0, 0, -1), z_dir=(1, 0, 0)), mode=Mode.PRIVATE) as head_trim_sk:
        with BuildLine():
            Line((-4, -3.041451884), (-4, -4.041451884))
            Line((-4, -4.041451884), (-3, -4.041451884))
            ThreePointArc((-3, -4.041451884), (-3.707106781, -3.748558666), (-4, -3.041451884))
        make_face()
    revolve(head_trim_sk.sketch.rotate(Axis((0, 0, 15.085599173), (0, 0, -1)), 90), axis=Axis((0, 0, 15.085599173), (0, 0, -1)), mode=Mode.SUBTRACT)

    # Sketch6 → Head Cut (cut)
    with BuildSketch(Plane.XY.offset(4)):
        Circle(SKETCH6_R)
    extrude(amount=-HEAD_CUT_DEPTH, mode=Mode.SUBTRACT)

    # Fillet1
    fillet1_edges = [part.edges().sort_by_distance(p)[0] for p in [
        (-2.625, 0, 3),
    ]]
    fillet(fillet1_edges, radius=FILLET1_R - 0.0001)  # a hair under: the kernel refuses the full size


solid = part.part
